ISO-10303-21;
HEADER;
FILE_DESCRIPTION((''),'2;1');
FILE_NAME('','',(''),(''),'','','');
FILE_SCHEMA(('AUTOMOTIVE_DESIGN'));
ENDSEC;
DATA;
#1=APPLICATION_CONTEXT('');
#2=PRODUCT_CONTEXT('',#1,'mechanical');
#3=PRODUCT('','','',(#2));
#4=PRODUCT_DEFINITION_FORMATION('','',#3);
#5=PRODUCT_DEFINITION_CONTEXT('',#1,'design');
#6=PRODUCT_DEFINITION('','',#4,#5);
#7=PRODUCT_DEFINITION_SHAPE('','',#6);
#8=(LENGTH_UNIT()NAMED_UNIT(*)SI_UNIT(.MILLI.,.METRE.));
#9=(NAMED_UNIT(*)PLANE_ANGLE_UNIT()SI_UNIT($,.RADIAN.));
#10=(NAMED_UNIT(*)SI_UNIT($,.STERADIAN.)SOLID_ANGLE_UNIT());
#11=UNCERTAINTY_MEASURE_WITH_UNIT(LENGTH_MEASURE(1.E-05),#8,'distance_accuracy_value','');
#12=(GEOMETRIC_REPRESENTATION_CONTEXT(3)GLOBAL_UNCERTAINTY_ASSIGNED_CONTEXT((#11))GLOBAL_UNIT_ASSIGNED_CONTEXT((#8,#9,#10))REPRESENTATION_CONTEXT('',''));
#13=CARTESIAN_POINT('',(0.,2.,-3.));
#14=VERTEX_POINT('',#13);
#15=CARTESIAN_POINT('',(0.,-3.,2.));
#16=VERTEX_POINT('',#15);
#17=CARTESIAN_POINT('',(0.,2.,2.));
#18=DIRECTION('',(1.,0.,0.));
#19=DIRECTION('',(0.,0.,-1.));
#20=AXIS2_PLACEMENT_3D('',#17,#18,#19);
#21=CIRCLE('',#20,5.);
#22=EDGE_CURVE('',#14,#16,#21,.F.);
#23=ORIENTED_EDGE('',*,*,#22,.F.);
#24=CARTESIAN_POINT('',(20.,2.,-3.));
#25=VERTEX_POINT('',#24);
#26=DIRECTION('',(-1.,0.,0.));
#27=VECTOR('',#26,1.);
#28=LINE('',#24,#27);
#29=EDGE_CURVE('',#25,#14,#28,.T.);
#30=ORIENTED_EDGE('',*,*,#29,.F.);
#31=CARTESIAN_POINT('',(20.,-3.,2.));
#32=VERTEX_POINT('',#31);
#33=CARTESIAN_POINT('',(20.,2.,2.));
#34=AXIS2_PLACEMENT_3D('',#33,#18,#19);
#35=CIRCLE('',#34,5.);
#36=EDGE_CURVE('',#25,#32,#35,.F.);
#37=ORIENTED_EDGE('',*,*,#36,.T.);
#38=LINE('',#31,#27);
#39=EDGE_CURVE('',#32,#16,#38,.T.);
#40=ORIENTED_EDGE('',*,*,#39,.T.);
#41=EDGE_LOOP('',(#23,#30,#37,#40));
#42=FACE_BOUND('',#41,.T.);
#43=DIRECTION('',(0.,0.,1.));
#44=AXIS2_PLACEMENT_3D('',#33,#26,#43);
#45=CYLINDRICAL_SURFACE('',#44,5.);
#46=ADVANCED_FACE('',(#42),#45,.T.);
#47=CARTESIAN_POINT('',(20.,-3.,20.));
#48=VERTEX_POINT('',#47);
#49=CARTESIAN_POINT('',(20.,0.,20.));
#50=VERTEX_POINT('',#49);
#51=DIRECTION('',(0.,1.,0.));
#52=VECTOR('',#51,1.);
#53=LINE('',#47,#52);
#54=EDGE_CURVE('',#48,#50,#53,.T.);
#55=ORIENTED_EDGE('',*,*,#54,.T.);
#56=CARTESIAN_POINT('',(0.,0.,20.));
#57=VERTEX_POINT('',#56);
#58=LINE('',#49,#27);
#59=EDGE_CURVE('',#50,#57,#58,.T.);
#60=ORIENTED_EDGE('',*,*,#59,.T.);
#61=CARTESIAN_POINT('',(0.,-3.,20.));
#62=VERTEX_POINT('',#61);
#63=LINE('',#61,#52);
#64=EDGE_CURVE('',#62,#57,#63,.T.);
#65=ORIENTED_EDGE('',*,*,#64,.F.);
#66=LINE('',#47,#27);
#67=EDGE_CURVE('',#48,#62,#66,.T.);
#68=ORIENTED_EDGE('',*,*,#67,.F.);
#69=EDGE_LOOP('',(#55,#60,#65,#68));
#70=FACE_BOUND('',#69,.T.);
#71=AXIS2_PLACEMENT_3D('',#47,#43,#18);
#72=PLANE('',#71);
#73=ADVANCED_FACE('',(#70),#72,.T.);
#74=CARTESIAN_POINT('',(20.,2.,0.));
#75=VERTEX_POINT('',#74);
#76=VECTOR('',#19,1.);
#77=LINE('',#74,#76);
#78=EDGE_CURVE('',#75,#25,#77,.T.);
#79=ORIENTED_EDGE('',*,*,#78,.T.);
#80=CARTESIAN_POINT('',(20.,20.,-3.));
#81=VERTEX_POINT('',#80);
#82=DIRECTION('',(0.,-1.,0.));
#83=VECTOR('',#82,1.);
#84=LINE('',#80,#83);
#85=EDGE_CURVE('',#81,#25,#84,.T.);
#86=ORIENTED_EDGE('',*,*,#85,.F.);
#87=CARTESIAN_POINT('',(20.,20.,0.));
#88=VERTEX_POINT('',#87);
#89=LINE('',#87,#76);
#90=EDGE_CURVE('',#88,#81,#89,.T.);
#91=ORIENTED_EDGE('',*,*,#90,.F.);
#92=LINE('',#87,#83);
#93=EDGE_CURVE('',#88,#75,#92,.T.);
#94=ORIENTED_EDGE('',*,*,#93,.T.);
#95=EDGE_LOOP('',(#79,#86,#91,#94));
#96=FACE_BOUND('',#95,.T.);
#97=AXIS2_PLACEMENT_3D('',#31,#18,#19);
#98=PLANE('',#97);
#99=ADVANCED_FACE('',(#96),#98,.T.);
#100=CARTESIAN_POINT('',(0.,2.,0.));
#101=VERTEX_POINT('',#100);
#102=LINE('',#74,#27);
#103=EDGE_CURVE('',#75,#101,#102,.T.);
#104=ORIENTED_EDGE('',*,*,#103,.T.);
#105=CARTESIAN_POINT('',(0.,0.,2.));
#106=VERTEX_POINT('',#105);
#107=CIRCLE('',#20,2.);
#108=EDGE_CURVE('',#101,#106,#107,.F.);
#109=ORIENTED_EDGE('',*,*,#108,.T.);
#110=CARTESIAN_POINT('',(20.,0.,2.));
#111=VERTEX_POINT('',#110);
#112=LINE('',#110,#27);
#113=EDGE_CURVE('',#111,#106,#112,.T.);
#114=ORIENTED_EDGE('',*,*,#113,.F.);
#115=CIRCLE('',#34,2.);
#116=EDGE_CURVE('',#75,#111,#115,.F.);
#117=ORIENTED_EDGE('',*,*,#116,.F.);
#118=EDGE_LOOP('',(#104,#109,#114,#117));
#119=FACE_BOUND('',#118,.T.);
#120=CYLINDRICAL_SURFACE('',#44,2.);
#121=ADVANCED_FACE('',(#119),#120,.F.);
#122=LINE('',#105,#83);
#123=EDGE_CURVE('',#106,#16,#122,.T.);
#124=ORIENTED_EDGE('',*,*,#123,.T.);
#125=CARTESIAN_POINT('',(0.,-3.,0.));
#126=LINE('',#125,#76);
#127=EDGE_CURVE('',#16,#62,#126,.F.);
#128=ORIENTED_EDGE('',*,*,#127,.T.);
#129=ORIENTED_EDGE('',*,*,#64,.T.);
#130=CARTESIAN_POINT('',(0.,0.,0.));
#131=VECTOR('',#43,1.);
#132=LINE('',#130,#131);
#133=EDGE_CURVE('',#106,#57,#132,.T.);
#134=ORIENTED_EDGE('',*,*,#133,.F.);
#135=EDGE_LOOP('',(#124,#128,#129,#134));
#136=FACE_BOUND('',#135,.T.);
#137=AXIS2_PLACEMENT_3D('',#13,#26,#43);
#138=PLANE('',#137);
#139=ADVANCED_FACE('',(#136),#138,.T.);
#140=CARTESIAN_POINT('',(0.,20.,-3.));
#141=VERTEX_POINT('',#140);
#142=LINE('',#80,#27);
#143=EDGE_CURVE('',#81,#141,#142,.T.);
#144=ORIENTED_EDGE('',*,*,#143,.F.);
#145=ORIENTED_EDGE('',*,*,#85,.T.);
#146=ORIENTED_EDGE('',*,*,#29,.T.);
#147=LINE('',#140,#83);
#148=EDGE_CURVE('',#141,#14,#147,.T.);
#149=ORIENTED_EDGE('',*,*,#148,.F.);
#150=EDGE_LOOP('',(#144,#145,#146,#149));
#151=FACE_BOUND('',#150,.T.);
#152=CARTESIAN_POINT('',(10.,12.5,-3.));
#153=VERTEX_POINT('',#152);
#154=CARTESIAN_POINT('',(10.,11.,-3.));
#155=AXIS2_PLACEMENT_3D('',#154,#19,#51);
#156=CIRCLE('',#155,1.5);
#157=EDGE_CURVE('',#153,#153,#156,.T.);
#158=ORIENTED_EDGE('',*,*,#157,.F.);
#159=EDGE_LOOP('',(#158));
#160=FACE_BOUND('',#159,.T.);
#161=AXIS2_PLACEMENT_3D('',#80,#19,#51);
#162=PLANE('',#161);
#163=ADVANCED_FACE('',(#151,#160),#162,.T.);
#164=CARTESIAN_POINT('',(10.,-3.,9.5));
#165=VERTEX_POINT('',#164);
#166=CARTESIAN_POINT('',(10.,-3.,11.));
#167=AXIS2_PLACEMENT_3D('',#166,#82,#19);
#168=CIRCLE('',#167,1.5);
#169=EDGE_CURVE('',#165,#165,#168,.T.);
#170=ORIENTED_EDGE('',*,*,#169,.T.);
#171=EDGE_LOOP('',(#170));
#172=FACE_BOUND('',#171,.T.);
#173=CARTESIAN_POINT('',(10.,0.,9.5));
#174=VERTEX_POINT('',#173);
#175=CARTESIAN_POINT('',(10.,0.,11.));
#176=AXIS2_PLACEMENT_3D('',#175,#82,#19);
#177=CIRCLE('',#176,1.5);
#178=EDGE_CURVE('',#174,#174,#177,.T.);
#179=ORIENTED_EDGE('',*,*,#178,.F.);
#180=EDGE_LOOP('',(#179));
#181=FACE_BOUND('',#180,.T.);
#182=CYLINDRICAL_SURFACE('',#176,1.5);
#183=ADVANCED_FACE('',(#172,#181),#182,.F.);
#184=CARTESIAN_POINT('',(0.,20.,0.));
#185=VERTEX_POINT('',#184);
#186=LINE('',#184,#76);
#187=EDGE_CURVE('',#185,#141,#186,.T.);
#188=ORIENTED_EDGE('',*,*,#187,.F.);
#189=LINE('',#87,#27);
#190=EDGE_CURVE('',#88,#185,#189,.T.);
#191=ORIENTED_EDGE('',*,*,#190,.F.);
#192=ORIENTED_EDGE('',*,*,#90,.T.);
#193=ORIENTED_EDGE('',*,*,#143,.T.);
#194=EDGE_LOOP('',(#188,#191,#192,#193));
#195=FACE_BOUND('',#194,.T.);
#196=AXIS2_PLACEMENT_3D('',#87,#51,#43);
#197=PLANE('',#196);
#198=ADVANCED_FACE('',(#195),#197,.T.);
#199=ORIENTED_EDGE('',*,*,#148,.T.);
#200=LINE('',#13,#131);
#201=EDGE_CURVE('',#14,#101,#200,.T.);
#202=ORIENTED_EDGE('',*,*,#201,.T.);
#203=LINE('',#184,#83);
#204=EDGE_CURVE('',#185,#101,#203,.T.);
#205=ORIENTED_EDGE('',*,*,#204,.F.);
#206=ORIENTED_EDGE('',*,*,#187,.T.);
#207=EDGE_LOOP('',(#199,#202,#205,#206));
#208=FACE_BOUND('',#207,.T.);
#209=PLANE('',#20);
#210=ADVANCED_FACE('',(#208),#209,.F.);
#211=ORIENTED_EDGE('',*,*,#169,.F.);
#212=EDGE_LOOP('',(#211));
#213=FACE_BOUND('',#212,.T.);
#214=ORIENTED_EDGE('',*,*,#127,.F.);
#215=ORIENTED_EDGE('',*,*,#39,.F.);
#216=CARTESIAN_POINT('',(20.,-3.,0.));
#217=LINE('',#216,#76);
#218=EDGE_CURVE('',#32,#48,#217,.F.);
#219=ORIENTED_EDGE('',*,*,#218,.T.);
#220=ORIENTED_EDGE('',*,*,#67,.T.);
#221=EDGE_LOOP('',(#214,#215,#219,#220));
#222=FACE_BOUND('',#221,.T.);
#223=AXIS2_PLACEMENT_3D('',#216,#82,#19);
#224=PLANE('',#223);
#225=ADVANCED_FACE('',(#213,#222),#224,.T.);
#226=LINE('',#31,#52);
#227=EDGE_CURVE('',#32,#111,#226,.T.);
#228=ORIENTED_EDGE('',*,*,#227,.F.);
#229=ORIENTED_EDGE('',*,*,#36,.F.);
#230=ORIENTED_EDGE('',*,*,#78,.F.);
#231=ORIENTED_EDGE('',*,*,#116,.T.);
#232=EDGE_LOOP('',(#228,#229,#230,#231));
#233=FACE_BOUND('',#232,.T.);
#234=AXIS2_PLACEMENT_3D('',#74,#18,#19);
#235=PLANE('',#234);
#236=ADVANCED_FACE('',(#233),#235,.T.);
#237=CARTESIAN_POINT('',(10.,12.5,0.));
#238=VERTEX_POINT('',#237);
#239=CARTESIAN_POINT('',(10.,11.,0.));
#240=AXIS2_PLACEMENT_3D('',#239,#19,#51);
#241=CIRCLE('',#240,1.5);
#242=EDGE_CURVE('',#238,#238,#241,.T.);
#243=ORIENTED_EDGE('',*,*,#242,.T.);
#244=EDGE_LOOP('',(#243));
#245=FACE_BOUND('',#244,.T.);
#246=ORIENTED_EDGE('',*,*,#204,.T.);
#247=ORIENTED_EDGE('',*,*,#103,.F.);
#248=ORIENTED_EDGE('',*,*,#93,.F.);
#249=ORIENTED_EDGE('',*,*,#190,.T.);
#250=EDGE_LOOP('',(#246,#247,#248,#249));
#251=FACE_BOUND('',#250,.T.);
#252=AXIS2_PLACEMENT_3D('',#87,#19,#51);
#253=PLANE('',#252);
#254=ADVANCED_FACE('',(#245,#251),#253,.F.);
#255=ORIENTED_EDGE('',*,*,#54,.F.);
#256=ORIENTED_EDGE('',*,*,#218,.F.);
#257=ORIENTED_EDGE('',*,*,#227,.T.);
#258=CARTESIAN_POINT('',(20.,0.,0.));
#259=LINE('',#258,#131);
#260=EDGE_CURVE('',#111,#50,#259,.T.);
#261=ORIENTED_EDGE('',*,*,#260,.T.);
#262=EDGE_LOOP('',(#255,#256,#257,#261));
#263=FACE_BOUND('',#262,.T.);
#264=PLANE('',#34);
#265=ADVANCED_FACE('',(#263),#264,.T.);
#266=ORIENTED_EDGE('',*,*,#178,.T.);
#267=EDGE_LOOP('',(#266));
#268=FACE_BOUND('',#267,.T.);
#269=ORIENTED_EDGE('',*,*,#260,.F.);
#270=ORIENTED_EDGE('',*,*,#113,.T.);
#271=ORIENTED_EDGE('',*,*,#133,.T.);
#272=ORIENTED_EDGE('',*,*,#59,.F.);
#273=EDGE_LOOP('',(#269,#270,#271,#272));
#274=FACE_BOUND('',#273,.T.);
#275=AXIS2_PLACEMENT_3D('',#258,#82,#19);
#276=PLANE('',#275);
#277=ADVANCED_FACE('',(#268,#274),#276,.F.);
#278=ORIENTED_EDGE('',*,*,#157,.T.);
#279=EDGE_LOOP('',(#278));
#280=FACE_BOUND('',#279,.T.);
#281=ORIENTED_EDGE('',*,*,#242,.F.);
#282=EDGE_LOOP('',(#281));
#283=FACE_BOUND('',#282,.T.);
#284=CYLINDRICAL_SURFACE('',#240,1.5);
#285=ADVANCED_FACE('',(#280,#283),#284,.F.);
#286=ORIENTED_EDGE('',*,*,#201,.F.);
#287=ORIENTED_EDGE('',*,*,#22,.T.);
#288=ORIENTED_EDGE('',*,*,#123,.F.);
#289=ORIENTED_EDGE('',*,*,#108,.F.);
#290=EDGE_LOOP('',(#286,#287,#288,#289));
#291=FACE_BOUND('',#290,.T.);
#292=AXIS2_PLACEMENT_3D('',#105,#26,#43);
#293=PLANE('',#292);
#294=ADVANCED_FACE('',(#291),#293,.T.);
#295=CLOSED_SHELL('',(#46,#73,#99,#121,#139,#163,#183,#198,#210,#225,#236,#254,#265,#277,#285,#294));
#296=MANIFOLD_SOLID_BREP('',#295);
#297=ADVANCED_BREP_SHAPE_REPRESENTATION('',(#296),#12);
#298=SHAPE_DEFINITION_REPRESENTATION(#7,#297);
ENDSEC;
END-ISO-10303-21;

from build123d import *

# Parameters (mm, degrees)
BASE_FLANGE1_DEPTH = 20
SKETCH6_R          = 1.5
CUT_EXTRUDE1_DEPTH = 10
SKETCH7_R          = 1.5
CUT_EXTRUDE2_DEPTH = 3


# Sheet-metal steps are written as plain solids
with BuildPart() as part:
    # Sketch1 → Base-Flange1 (new body)
    with BuildSketch(Plane(origin=(0, 0, 0), x_dir=(0, 0, -1), z_dir=(1, 0, 0))):
        with BuildLine():
            Line((0, 20), (0, 2))
            ThreePointArc((0, 2), (-0.585786438, 0.585786438), (-2, 0))
            Line((-2, 0), (-20, 0))
            Line((-20, 0), (-20, -3))
            Line((-20, -3), (-2, -3))
            ThreePointArc((-2, -3), (1.535533906, -1.535533906), (3, 2))
            Line((3, 2), (3, 20))
            Line((3, 20), (0, 20))
        make_face()
    extrude(amount=BASE_FLANGE1_DEPTH)

    # Sketch6 → Cut-Extrude1 (cut)
    with BuildSketch(Plane(origin=(0, 0, -3), x_dir=(-1, 0, 0), z_dir=(0, 0, -1))):
        with Locations(Location((-10, 11, 0), (0, 0, 90))):
            Circle(SKETCH6_R)
    extrude(amount=-CUT_EXTRUDE1_DEPTH, mode=Mode.SUBTRACT)

    # Sketch7 → Cut-Extrude2 (cut)
    with BuildSketch(Plane.XZ.offset(3)):
        with Locations(Location((10, 11, 0), (0, 0, 270))):
            Circle(SKETCH7_R)
    extrude(amount=-CUT_EXTRUDE2_DEPTH, mode=Mode.SUBTRACT)


solid = part.part
